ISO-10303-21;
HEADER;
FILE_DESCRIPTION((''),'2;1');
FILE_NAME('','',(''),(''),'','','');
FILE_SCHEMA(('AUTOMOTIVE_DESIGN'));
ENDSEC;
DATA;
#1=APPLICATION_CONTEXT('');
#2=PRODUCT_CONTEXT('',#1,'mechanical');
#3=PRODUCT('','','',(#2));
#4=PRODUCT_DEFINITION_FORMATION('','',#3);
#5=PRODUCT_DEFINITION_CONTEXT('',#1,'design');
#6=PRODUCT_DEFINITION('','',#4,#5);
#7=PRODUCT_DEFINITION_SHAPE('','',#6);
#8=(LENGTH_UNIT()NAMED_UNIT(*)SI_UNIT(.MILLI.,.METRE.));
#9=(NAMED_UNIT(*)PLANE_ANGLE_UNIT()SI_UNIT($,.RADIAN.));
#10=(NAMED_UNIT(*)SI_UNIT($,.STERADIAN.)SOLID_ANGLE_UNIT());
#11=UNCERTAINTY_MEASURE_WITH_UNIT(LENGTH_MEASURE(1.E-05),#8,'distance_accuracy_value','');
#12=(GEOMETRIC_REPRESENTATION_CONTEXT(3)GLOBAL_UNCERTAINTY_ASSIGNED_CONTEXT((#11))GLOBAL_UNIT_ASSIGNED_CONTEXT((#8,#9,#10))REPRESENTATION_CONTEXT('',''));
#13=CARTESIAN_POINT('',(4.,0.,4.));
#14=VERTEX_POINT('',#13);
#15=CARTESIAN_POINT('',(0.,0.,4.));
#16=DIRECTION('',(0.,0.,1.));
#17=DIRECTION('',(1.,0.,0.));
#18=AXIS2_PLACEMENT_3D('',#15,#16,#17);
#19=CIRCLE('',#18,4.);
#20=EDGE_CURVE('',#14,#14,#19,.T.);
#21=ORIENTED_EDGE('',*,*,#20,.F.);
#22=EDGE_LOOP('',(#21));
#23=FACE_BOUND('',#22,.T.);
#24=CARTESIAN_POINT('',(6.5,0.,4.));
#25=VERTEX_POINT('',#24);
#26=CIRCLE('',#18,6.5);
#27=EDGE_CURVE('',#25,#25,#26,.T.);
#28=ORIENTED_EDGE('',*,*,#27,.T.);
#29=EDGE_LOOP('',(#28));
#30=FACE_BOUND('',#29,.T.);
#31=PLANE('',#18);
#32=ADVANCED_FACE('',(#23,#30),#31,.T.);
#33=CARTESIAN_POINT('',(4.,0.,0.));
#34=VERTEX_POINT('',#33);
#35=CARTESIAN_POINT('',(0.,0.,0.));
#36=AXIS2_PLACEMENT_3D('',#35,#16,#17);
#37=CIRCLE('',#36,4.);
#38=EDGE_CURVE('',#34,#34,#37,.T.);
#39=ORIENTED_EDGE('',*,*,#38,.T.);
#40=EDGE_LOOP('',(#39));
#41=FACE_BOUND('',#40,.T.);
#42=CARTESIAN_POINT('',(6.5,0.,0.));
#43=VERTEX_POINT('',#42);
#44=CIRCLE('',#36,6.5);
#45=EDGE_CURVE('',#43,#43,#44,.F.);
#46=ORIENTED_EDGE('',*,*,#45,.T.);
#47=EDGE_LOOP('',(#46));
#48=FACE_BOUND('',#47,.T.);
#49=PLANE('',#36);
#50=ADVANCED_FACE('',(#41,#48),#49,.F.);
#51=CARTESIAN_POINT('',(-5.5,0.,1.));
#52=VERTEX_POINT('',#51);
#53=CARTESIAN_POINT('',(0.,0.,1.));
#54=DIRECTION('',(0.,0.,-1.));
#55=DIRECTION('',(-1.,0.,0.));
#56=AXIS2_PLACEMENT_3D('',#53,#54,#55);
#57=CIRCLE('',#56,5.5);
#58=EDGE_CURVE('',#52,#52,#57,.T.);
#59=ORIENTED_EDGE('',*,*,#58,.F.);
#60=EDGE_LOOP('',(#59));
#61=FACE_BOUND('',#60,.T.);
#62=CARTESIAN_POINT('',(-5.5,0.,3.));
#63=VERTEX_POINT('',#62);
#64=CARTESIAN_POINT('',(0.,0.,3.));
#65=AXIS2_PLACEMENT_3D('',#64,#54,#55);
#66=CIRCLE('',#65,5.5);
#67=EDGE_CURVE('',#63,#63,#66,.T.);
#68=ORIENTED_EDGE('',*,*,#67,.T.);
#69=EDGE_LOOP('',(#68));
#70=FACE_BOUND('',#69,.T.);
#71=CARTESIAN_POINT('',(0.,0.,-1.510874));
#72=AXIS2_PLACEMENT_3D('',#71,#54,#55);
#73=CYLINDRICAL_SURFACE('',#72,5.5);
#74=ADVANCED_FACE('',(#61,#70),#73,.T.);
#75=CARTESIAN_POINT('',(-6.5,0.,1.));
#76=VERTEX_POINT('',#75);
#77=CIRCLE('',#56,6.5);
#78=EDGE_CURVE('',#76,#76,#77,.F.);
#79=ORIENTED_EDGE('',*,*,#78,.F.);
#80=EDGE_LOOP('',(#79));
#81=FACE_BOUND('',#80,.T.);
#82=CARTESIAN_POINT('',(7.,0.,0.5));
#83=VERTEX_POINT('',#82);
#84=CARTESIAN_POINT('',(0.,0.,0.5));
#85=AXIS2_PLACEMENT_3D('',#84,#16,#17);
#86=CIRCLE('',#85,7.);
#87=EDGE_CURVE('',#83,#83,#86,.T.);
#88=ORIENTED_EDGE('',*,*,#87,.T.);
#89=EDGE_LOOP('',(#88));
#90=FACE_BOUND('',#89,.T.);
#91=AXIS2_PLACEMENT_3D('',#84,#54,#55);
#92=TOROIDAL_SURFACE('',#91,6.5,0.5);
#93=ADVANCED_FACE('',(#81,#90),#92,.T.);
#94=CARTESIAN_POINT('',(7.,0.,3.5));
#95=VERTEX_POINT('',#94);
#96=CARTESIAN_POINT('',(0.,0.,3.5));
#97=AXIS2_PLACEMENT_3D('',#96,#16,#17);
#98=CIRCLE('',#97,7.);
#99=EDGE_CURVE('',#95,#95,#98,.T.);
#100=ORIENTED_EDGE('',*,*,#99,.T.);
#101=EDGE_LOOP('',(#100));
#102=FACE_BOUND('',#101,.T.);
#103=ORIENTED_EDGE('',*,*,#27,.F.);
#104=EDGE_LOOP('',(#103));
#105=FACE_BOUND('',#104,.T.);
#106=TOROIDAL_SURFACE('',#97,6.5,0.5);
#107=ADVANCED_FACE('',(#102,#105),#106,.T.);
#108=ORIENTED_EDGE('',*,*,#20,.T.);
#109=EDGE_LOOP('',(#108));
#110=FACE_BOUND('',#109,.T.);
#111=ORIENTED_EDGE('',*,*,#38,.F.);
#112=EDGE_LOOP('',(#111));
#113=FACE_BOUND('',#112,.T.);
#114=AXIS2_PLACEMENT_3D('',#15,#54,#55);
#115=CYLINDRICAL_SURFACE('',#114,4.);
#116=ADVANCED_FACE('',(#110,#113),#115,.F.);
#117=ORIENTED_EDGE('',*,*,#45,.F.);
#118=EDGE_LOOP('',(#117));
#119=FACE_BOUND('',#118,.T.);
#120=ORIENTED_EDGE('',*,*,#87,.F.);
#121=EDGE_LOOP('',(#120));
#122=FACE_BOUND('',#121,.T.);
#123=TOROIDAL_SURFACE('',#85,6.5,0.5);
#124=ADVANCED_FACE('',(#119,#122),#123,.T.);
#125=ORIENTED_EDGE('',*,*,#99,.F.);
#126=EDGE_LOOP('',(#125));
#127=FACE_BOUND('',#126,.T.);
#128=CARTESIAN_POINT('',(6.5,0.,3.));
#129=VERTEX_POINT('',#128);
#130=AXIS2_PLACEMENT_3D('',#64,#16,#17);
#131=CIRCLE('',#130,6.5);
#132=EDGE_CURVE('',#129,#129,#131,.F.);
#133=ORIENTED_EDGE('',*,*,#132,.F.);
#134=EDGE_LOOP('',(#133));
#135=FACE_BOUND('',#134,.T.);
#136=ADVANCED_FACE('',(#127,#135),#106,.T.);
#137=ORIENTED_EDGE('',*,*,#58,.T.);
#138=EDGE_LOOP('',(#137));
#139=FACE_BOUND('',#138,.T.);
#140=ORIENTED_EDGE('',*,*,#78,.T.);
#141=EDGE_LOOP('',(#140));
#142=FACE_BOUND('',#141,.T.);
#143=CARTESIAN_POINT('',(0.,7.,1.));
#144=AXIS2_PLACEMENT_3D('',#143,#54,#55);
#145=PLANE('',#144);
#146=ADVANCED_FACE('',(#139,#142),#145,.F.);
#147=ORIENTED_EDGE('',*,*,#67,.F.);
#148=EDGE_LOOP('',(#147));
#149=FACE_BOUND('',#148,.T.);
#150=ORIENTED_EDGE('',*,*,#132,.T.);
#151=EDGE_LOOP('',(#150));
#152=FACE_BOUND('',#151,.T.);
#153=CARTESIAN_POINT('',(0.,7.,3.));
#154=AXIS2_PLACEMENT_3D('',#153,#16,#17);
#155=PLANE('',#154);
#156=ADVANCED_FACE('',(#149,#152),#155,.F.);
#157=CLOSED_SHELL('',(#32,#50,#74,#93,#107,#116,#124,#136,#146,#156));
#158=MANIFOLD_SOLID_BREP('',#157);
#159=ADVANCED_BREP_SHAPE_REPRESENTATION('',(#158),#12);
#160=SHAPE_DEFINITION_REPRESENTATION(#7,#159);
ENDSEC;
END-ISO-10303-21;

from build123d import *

# Parameters (mm, degrees)
SKETCH_1_R      = 7
SKETCH_1_R_2    = 4
EXTRUDE_1_DEPTH = 4
SKETCH_2_W      = 2
SKETCH_2_H      = 1.5
FILLET_1_R      = 0.5


with BuildPart() as part:
    # 草图1 → 凸台-拉伸1 (new body)
    with BuildSketch(Plane.XY):
        Circle(SKETCH_1_R)
        Circle(SKETCH_1_R_2, mode=Mode.SUBTRACT)
    extrude(amount=EXTRUDE_1_DEPTH)

    # 草图2 → 切除-旋转1 (revolve, cut)
    with BuildSketch(Plane(origin=(0, 0, 0), x_dir=(0, 0, -1), z_dir=(1, 0, 0)), mode=Mode.PRIVATE) as cut_revolve_1_sk:
        with Locations((-2, 6.25)):
            Rectangle(SKETCH_2_W, SKETCH_2_H)
    revolve(cut_revolve_1_sk.sketch.rotate(Axis((0, 0, -1.510874211), (0, 0, 1)), 90), axis=Axis((0, 0, -1.510874211), (0, 0, 1)), mode=Mode.SUBTRACT)

    # 圆角1
    fillet_1_edges = [part.edges().sort_by_distance(p)[0] for p in [
        (-7, 0, 1),
        (-7, 0, 3),
        (-7, 0, 0),
        (-7, 0, 4),
    ]]
    fillet(fillet_1_edges, radius=FILLET_1_R - 0.0001)  # a hair under: the kernel refuses the full size


solid = part.part
